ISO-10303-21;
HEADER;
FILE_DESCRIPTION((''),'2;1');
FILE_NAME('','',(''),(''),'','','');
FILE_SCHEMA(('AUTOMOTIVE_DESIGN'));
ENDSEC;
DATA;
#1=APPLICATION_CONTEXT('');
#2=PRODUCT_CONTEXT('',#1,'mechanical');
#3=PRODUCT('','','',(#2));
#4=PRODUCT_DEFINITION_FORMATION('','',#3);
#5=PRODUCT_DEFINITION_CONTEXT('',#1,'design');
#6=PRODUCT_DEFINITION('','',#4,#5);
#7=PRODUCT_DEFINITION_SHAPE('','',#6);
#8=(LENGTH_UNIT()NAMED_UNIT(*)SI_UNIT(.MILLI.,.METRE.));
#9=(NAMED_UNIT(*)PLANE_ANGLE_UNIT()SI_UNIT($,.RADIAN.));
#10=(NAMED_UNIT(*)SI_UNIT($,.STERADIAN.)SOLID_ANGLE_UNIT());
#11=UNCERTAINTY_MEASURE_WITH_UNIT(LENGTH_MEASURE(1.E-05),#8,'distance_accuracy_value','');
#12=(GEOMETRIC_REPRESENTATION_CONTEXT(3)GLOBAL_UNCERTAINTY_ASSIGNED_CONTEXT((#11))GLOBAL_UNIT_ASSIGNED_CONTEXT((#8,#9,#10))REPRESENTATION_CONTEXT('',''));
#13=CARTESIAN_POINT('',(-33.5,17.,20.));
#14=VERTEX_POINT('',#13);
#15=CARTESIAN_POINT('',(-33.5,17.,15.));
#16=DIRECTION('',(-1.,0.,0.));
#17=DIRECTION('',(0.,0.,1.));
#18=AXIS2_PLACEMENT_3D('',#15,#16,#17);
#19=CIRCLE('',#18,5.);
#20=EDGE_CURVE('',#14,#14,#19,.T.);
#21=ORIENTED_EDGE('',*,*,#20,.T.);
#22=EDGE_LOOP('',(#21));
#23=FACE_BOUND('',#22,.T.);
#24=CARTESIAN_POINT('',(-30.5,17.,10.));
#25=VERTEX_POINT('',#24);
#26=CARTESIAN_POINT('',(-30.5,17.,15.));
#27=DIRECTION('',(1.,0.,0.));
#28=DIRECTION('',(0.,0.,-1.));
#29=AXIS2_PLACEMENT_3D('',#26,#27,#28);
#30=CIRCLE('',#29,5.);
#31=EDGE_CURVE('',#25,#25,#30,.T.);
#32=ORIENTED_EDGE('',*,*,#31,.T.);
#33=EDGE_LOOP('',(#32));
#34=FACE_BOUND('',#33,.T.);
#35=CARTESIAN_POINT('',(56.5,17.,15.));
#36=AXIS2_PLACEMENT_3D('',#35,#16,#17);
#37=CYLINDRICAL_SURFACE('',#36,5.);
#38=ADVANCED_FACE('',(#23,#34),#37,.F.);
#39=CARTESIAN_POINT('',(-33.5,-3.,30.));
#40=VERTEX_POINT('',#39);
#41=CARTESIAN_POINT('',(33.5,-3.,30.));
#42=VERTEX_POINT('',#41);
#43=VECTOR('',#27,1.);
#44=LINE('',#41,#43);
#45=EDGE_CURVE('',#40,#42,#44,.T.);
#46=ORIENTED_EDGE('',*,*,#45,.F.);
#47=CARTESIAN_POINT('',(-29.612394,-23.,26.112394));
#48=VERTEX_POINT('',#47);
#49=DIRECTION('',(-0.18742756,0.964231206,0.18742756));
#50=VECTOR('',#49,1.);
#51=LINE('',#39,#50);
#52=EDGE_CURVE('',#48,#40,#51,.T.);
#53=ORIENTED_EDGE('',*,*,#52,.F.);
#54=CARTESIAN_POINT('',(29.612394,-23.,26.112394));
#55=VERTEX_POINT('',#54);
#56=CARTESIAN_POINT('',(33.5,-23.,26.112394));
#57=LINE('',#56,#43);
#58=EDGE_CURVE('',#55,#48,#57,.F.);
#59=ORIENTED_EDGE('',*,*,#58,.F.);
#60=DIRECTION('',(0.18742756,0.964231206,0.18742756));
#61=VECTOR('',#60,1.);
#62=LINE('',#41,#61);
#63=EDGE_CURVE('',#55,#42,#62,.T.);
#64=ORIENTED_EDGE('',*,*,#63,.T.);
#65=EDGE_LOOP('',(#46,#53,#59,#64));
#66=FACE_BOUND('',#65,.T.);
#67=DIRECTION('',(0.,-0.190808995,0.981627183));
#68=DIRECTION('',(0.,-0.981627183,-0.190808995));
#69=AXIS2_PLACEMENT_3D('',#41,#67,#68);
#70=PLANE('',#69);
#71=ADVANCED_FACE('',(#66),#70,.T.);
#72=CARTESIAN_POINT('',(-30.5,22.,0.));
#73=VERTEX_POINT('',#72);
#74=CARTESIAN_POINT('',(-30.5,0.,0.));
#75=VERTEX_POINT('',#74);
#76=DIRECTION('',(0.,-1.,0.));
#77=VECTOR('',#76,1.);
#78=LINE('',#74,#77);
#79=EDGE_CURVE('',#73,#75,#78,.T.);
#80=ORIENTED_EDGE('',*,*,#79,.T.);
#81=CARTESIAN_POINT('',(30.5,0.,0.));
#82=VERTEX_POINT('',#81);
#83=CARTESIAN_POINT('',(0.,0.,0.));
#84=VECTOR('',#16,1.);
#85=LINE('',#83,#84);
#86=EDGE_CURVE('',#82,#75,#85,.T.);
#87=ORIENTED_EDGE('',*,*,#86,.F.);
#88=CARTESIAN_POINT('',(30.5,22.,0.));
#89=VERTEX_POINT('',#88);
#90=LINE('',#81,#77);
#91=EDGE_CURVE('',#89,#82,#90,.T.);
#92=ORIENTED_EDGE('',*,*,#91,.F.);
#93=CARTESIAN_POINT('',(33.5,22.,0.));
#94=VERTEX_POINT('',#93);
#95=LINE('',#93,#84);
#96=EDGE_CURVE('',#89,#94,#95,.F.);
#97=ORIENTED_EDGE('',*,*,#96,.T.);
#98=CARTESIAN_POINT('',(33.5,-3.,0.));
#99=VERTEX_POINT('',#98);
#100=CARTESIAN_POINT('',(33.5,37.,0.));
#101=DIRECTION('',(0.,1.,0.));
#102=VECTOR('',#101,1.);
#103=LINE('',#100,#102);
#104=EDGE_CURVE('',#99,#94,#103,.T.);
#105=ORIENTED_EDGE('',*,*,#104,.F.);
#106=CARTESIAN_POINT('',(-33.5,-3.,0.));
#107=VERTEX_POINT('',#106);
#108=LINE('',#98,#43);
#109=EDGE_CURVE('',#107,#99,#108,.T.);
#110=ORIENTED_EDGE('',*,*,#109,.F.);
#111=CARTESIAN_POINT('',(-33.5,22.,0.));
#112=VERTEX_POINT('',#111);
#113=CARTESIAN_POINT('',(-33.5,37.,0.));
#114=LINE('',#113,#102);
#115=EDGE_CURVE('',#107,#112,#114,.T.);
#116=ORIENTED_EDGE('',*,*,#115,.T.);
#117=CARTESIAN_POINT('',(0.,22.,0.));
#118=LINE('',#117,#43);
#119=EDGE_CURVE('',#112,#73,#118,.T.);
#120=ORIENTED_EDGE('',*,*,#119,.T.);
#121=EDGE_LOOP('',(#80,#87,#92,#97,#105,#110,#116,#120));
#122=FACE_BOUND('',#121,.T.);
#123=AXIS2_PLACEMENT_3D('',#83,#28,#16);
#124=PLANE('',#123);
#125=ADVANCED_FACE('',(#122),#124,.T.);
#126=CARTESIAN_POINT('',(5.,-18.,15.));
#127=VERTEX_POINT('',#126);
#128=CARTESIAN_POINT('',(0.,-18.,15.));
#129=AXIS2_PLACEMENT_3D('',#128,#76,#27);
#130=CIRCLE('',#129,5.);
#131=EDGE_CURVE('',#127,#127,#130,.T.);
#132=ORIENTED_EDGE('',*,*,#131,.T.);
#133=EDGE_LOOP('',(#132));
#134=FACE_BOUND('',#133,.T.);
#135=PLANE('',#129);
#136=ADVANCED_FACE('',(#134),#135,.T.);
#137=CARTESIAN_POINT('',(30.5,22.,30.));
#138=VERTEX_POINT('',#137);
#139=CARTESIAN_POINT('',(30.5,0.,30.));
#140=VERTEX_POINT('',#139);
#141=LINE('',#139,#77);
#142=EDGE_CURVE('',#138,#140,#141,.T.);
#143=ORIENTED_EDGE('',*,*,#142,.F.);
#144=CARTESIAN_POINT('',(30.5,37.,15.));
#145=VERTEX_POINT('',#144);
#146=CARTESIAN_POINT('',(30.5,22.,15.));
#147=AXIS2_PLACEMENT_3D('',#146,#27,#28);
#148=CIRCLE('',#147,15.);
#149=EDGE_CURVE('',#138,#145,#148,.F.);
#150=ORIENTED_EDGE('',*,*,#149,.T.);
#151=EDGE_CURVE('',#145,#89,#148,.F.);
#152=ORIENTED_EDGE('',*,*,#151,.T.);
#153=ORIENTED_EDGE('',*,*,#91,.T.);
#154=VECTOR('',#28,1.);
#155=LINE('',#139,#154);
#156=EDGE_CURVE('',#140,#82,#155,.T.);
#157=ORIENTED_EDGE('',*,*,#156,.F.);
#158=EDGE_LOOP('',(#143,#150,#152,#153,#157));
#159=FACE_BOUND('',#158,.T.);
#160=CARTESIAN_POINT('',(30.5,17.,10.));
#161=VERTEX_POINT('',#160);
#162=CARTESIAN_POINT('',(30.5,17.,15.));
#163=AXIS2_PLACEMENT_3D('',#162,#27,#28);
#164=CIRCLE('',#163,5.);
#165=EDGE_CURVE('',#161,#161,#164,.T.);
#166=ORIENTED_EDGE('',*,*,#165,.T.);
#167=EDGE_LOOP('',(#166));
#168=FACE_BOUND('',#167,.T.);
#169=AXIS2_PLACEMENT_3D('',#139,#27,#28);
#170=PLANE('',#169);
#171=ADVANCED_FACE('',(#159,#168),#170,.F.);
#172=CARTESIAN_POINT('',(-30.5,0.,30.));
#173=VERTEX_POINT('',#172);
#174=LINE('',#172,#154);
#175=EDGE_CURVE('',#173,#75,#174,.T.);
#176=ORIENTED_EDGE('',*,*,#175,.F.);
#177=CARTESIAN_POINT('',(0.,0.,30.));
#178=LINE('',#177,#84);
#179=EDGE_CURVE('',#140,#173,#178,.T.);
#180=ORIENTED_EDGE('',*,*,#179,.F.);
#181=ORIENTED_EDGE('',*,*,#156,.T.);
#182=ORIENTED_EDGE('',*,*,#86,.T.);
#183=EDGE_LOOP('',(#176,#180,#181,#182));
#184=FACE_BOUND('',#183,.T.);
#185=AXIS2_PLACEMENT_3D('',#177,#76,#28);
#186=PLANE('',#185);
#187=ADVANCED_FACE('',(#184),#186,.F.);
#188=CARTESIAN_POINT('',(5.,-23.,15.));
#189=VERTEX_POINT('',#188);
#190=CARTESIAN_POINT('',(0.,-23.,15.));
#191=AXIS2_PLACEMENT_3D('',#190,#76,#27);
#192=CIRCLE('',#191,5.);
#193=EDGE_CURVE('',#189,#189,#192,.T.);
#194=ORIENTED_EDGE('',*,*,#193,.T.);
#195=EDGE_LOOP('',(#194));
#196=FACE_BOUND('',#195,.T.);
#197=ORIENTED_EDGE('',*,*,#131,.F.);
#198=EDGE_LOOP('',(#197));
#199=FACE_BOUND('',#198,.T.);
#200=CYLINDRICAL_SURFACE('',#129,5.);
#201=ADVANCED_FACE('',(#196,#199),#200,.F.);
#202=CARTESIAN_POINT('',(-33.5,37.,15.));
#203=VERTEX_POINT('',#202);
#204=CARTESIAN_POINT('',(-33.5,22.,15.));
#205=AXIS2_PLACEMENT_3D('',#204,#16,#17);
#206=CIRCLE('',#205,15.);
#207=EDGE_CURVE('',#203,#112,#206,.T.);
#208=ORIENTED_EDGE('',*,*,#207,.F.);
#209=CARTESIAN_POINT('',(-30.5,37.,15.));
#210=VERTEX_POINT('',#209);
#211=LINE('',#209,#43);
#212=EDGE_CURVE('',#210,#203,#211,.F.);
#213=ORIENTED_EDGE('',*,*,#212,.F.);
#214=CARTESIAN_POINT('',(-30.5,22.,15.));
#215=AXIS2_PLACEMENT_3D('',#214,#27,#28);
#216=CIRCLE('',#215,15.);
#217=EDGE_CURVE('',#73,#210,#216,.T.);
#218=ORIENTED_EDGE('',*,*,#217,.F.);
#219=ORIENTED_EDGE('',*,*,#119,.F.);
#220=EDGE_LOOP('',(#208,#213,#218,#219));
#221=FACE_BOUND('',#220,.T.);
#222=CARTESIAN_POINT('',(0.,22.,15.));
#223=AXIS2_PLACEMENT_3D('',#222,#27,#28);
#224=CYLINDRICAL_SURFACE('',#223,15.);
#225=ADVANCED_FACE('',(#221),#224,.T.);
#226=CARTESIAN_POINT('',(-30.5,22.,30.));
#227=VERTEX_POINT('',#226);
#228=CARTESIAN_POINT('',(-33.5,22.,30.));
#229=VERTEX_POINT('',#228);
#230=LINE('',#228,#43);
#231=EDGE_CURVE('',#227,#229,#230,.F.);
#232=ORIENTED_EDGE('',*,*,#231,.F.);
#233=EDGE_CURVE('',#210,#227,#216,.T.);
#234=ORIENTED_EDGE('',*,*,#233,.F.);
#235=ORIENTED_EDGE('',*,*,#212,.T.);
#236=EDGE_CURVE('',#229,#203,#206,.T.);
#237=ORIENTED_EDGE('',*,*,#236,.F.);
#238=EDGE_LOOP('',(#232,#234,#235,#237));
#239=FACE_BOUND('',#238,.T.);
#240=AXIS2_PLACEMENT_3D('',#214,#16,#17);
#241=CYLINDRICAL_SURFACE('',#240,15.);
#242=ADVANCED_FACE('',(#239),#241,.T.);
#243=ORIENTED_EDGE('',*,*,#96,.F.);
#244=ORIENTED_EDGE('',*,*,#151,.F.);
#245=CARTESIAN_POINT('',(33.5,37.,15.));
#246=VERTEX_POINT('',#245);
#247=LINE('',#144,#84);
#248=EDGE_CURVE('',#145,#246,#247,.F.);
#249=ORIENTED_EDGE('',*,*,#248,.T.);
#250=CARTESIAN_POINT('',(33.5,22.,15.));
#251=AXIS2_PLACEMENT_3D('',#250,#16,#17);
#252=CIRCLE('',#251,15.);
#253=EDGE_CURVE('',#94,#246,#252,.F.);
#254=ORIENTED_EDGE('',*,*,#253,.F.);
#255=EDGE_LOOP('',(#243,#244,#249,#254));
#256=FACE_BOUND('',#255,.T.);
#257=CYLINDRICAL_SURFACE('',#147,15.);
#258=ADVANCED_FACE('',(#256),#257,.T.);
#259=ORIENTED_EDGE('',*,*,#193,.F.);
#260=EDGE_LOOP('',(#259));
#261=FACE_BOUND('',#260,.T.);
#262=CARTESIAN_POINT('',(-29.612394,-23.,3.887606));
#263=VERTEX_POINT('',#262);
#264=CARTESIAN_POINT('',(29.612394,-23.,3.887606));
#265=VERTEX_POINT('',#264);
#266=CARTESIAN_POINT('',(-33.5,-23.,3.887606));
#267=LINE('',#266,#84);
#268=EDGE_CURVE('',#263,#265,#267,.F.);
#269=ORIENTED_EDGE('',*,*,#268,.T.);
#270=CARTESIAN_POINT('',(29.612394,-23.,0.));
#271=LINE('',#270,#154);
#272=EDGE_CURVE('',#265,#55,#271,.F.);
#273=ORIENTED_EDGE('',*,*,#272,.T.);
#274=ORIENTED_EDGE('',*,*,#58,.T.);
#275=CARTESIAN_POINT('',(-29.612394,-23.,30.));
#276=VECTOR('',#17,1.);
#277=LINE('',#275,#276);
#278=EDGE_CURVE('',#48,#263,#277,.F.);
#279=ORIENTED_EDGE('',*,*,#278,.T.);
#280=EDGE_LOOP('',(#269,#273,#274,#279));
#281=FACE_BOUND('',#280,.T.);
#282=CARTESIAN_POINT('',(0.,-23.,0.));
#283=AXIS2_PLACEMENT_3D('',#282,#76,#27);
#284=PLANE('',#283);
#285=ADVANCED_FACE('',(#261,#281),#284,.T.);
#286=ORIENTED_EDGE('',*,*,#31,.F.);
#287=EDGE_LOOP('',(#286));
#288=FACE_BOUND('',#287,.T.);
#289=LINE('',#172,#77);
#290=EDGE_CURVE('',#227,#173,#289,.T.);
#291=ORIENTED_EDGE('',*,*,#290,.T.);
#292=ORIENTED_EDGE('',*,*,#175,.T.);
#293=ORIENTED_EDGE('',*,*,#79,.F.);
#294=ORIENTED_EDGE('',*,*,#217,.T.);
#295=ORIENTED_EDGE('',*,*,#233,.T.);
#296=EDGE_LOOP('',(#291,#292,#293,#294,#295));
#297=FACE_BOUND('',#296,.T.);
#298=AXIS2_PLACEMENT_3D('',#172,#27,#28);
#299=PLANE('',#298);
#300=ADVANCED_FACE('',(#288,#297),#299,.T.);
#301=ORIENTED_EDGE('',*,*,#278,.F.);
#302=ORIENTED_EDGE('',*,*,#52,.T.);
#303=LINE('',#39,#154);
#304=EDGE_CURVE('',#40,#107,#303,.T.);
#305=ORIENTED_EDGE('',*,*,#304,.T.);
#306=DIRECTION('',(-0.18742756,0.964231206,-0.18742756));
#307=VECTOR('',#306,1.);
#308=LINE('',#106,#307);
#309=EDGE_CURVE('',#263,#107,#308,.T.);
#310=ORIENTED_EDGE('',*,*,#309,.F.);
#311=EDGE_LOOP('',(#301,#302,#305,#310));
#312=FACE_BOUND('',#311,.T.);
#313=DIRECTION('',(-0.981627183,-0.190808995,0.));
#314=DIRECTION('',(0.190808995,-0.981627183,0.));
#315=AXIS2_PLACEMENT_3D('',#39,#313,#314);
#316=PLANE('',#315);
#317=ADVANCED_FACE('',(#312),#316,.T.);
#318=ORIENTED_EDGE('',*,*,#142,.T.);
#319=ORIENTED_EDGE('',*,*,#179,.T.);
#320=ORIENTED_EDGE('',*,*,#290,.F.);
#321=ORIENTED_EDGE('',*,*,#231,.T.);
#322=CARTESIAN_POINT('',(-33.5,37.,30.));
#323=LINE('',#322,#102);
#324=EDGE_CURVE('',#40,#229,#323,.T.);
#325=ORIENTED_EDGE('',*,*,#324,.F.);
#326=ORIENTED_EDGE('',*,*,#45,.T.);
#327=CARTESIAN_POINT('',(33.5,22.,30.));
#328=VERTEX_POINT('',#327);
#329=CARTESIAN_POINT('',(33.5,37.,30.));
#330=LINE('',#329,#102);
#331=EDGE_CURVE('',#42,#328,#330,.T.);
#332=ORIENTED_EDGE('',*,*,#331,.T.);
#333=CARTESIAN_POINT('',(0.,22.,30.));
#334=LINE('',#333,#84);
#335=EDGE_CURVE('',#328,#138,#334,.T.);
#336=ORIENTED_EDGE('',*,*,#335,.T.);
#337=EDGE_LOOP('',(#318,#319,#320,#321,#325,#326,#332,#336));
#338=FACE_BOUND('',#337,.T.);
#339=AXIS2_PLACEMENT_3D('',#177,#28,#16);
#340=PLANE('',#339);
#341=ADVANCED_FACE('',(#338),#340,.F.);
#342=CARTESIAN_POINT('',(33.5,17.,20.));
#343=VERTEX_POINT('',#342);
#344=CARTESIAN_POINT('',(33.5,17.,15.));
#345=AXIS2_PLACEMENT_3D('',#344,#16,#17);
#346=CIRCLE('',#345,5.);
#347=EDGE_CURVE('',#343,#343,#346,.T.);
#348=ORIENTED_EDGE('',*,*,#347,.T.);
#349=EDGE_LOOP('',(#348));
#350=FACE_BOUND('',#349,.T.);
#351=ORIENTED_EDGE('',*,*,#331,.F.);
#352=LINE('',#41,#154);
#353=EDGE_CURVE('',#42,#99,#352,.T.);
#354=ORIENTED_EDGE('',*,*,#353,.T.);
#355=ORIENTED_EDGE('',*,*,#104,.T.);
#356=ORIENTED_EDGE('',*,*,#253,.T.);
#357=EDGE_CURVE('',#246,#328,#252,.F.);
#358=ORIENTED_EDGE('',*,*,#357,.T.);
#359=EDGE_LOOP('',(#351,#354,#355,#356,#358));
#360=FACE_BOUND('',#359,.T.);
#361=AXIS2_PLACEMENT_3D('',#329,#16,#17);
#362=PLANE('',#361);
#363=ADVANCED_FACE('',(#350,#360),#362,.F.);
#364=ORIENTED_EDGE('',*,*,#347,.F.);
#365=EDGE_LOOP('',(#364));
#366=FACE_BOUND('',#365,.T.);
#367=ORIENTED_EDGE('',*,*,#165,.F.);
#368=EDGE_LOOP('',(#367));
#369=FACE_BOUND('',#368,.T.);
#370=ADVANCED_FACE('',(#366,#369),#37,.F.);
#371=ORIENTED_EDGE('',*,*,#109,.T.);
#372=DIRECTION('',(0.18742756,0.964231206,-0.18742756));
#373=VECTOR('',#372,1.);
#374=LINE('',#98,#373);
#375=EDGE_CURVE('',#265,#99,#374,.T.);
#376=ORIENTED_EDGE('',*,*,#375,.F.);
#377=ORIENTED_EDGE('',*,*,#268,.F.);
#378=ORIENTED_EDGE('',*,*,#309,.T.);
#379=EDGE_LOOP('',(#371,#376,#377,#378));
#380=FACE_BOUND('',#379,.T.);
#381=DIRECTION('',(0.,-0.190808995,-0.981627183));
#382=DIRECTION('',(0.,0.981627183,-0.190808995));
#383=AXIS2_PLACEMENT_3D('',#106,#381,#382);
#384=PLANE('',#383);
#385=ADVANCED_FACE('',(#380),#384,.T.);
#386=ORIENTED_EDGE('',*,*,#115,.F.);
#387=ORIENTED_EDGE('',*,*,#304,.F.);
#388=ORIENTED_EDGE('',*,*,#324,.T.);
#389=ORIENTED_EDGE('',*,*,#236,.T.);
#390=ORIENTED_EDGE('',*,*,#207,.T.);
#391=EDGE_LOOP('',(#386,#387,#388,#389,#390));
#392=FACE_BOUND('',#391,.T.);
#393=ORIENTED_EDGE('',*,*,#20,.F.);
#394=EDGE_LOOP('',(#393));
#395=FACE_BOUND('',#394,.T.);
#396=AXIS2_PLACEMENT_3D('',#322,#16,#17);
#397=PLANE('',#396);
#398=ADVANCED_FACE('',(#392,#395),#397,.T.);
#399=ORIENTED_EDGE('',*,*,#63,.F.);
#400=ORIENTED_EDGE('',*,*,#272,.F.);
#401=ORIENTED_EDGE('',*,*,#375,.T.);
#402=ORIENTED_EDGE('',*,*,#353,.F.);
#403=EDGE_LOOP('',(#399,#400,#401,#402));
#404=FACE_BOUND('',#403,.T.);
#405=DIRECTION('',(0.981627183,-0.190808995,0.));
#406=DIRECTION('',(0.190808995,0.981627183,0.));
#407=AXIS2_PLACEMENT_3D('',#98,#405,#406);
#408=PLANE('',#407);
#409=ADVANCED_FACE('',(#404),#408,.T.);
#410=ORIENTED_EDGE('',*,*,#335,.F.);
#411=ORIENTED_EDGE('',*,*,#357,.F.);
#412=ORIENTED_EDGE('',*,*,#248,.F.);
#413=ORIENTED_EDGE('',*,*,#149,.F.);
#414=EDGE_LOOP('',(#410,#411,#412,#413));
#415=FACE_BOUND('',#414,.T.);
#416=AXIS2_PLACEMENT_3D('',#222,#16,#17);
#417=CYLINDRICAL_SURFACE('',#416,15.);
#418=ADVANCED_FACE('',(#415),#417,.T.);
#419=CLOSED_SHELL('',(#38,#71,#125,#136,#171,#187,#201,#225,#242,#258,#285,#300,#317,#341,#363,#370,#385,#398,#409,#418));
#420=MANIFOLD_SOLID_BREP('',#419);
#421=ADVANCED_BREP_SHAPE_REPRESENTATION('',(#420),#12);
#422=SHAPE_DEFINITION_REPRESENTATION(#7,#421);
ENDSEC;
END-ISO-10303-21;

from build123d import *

# Parameters (mm, degrees)
BOSS_EXTRUDE1_DEPTH = 30
SKETCH2_R           = 5
CUT_EXTRUDE1_DEPTH  = 90
FILLET1_R           = 15
SKETCH3_W           = 67
SKETCH3_H           = 30
BOSS_EXTRUDE2_DEPTH = 20
BOSS_EXTRUDE2_TAPER = 11
SKETCH4_R           = 5
CUT_EXTRUDE2_DEPTH  = 5


with BuildPart() as part:
    # Sketch1 → Boss-Extrude1 (new body)
    with BuildSketch(Plane.XY):
        Polygon((0, 0), (30.5, 0), (30.5, 37), (33.5, 37), (33.5, -3), (0, -3), align=None)
    boss_extrude1 = extrude(amount=BOSS_EXTRUDE1_DEPTH)

    # Mirror1: Boss-Extrude1 across plane
    add(boss_extrude1.mirror(Plane(origin=(0, -3, 30), x_dir=(0, 0, 1), z_dir=(1, 0, 0))))

    # Sketch2 → Cut-Extrude1 (cut)
    with BuildSketch(Plane.ZY.offset(33.5)):
        with Locations((15, 17)):
            Circle(SKETCH2_R)
    extrude(amount=-CUT_EXTRUDE1_DEPTH, mode=Mode.SUBTRACT)

    # Fillet1
    fillet1_edges = [part.edges().sort_by_distance(p)[0] for p in [
        (-32, 37, 30),
        (-32, 37, 0),
        (32, 37, 0),
        (32, 37, 30),
    ]]
    fillet(fillet1_edges, radius=FILLET1_R - 0.0001)  # a hair under: the kernel refuses the full size

    # Sketch3 → Boss-Extrude2 (add)
    with BuildSketch(Plane.XZ.offset(3)):
        with Locations((0, 15)):
            Rectangle(SKETCH3_W, SKETCH3_H)
    extrude(amount=BOSS_EXTRUDE2_DEPTH, taper=BOSS_EXTRUDE2_TAPER)

    # Sketch4 → Cut-Extrude2 (cut)
    with BuildSketch(Plane.XZ.offset(23)):
        with Locations((0, 15)):
            Circle(SKETCH4_R)
    extrude(amount=-CUT_EXTRUDE2_DEPTH, mode=Mode.SUBTRACT)


solid = part.part
